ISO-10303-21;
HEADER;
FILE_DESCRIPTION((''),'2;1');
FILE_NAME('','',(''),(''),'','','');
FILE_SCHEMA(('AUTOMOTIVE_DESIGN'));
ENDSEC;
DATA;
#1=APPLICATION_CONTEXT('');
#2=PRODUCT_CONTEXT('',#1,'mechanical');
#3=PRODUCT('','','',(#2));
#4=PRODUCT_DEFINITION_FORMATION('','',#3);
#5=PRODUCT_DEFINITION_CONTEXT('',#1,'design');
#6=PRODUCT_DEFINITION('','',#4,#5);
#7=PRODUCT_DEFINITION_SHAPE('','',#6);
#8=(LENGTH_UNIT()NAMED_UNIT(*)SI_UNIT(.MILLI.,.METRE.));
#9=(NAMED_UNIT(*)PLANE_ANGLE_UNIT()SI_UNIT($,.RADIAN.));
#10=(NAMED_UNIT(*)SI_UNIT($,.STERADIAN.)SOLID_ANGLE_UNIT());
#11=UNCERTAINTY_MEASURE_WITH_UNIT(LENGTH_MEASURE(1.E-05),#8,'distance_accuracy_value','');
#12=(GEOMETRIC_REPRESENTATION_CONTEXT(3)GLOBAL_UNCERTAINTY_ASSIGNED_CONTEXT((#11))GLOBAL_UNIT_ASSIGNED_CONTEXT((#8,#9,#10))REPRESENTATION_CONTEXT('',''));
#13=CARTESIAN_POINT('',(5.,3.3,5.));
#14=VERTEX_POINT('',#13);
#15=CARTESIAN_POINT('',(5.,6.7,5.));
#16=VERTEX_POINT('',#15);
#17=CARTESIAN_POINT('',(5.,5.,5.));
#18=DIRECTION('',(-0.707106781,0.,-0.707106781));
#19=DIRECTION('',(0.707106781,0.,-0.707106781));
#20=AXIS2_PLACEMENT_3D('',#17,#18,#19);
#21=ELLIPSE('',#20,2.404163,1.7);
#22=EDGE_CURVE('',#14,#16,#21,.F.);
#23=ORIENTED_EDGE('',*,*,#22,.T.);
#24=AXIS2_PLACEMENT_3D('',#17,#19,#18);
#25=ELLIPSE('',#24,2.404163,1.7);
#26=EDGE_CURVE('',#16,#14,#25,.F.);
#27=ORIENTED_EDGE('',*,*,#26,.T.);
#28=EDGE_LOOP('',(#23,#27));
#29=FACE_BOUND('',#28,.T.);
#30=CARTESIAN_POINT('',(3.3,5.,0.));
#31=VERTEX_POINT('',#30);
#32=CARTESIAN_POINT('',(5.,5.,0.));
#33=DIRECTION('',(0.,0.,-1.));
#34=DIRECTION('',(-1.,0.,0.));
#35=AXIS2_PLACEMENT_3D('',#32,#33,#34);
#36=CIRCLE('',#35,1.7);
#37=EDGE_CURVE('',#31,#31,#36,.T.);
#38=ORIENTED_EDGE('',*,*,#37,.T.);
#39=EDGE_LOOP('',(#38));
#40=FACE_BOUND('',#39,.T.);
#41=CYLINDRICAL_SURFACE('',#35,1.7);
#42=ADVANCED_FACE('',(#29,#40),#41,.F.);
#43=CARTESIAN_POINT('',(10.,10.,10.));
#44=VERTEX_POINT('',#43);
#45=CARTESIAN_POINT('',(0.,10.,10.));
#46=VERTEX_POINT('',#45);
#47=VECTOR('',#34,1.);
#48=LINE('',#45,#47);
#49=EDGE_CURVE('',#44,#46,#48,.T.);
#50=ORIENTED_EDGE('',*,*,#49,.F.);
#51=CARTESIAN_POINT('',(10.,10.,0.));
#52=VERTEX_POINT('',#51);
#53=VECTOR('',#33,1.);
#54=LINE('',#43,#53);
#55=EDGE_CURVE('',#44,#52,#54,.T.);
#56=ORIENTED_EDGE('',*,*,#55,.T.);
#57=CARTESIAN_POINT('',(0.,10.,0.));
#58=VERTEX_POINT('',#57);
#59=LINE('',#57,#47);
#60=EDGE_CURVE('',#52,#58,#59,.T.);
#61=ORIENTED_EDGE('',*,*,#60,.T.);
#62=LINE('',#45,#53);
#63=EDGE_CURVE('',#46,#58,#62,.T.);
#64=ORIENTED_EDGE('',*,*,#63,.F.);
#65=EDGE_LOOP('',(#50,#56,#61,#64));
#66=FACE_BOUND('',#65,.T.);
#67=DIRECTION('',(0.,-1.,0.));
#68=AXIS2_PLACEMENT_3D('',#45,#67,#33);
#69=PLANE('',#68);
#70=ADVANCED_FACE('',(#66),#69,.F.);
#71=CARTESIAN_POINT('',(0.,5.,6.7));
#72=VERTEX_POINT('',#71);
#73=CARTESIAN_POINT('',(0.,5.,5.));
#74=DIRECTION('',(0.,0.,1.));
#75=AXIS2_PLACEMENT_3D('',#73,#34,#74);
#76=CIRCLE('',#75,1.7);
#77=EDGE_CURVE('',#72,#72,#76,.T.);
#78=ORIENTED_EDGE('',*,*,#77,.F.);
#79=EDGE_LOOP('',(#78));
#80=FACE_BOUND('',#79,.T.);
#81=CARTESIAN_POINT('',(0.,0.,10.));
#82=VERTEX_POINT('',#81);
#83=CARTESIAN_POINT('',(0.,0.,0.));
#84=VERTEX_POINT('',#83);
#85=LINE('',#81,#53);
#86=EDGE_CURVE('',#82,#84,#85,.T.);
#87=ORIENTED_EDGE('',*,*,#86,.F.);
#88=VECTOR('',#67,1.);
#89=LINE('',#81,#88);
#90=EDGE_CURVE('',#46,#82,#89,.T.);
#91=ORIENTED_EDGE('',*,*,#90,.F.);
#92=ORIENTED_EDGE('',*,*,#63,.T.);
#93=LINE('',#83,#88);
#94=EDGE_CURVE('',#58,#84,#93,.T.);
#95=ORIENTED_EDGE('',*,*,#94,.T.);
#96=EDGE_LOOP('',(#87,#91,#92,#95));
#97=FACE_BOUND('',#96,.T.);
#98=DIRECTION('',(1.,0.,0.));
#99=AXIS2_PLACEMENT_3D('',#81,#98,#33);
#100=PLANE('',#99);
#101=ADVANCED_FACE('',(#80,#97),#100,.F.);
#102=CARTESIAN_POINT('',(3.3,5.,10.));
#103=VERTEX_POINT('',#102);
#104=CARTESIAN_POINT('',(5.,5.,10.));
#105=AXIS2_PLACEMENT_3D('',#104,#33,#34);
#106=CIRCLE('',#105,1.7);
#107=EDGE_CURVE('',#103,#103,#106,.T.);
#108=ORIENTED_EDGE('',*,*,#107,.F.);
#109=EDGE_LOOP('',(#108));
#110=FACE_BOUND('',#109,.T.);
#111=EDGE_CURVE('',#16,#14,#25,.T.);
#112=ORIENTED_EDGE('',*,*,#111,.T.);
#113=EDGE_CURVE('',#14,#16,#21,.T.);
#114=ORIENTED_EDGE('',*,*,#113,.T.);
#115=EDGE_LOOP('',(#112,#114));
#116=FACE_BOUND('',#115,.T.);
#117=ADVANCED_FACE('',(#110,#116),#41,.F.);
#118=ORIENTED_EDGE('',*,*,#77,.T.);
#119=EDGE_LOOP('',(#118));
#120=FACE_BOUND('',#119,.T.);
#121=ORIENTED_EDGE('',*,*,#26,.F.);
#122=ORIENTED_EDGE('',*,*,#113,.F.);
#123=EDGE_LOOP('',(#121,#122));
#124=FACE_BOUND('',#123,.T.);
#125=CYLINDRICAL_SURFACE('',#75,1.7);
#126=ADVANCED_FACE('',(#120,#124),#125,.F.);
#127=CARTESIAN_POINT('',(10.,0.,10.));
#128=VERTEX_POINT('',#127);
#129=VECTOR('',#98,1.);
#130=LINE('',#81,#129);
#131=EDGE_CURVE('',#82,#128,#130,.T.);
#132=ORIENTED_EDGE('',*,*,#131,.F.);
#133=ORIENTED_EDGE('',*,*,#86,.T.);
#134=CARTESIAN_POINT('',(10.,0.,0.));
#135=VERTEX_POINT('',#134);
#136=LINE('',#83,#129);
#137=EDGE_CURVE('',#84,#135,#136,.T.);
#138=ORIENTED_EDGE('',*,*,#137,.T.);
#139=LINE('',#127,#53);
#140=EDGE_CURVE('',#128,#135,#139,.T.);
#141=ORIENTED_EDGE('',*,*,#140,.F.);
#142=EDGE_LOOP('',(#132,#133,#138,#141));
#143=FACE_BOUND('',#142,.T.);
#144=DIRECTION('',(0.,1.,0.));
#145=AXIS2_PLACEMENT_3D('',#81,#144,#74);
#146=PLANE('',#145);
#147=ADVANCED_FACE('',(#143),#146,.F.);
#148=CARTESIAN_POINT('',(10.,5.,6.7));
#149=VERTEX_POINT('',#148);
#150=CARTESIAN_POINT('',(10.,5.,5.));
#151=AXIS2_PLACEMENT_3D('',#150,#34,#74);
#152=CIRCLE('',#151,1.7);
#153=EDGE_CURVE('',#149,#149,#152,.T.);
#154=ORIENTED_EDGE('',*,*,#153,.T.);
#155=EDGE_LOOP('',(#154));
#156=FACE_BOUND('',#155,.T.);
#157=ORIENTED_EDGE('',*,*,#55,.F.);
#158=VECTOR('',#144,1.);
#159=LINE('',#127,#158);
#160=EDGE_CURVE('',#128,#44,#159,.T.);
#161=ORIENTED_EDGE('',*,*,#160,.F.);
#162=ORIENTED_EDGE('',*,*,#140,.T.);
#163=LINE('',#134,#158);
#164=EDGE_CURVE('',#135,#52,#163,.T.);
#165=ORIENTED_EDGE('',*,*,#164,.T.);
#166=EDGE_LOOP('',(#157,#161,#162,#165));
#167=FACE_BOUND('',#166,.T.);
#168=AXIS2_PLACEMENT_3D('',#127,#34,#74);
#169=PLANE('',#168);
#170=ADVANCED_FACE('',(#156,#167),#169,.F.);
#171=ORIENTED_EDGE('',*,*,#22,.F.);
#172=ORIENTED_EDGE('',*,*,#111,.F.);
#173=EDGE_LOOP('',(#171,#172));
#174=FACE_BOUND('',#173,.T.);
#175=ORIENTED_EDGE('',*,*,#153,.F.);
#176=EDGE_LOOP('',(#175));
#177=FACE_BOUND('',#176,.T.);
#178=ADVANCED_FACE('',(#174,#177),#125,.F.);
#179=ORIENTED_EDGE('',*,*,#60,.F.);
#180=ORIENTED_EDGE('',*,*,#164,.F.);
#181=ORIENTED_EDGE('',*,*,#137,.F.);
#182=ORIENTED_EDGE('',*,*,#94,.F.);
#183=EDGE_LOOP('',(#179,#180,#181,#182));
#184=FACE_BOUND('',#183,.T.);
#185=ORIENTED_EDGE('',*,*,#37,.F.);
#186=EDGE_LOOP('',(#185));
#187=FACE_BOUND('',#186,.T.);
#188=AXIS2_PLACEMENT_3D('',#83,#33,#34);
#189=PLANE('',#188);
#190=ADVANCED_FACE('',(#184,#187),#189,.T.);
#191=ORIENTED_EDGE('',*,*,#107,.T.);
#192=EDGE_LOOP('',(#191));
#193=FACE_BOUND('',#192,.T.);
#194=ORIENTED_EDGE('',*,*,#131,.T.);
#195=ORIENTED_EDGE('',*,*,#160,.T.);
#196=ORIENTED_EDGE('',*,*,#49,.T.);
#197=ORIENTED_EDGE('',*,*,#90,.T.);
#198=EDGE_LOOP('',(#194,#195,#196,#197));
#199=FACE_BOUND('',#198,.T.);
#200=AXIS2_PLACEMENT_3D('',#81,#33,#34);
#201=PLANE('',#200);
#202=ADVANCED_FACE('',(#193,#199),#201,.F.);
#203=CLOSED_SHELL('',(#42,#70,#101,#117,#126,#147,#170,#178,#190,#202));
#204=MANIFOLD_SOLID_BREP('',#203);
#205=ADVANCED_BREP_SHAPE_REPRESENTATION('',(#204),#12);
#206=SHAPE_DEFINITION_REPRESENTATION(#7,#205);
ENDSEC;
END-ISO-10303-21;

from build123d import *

# Parameters (mm, degrees)
ESQUISSE1_W                  = 10
ESQUISSE1_H                  = 10
BOSS_EXTRU_1_DEPTH           = 10
ESQUISSE2_R                  = 1.5
ENL_V_MAT_EXTRU_1_DEPTH      = 18.320508076
ESQUISSE3_R                  = 1.5
ENL_V_MAT_EXTRU_2_DEPTH      = 18.320508076
D_GAGEMENT_START             = -1
D_GAGEMENT_M31_OUTLINE_R     = 1.7
D_GAGEMENT_M31_OUTLINE_R_2   = 1.5
D_GAGEMENT_M31_DEPTH         = 12
D_GAGEMENT_M31_2_OUTLINE_R   = 1.7
D_GAGEMENT_M31_2_OUTLINE_R_2 = 1.5
D_GAGEMENT_M31_2_DEPTH       = 12


with BuildPart() as part:
    # Esquisse1 → Boss.-Extru.1 (new body)
    with BuildSketch(Plane.XY):
        with Locations((5, 5)):
            Rectangle(ESQUISSE1_W, ESQUISSE1_H)
    extrude(amount=BOSS_EXTRU_1_DEPTH)

    # Esquisse2 → Enlèv. mat.-Extru.1 (cut, through all)
    with BuildSketch(Plane.XY.offset(10)):
        with Locations((5, 5)):
            Circle(ESQUISSE2_R)
    extrude(amount=-ENL_V_MAT_EXTRU_1_DEPTH, mode=Mode.SUBTRACT)

    # Esquisse3 → Enlèv. mat.-Extru.2 (cut, through all)
    with BuildSketch(Plane.ZY):
        with Locations((5, 5)):
            Circle(ESQUISSE3_R)
    extrude(amount=-ENL_V_MAT_EXTRU_2_DEPTH, mode=Mode.SUBTRACT)

    # Dégagement M31: read off the stored shape, not the designer's step
    # Dégagement M31 outline → Dégagement M31 (cut)
    with BuildSketch(Plane.XY.offset(D_GAGEMENT_START)):
        with Locations((5, 5)):
            Circle(D_GAGEMENT_M31_OUTLINE_R)
        with Locations((5, 5)):
            Circle(D_GAGEMENT_M31_OUTLINE_R_2, mode=Mode.SUBTRACT)
    extrude(amount=D_GAGEMENT_M31_DEPTH, mode=Mode.SUBTRACT)

    # D_gagement M31 2 outline → D_gagement M31 2 (cut)
    with BuildSketch(Plane.YZ.offset(D_GAGEMENT_START)):
        with Locations((5, 5)):
            Circle(D_GAGEMENT_M31_2_OUTLINE_R)
        with Locations((5, 5)):
            Circle(D_GAGEMENT_M31_2_OUTLINE_R_2, mode=Mode.SUBTRACT)
    extrude(amount=D_GAGEMENT_M31_2_DEPTH, mode=Mode.SUBTRACT)


solid = part.part
